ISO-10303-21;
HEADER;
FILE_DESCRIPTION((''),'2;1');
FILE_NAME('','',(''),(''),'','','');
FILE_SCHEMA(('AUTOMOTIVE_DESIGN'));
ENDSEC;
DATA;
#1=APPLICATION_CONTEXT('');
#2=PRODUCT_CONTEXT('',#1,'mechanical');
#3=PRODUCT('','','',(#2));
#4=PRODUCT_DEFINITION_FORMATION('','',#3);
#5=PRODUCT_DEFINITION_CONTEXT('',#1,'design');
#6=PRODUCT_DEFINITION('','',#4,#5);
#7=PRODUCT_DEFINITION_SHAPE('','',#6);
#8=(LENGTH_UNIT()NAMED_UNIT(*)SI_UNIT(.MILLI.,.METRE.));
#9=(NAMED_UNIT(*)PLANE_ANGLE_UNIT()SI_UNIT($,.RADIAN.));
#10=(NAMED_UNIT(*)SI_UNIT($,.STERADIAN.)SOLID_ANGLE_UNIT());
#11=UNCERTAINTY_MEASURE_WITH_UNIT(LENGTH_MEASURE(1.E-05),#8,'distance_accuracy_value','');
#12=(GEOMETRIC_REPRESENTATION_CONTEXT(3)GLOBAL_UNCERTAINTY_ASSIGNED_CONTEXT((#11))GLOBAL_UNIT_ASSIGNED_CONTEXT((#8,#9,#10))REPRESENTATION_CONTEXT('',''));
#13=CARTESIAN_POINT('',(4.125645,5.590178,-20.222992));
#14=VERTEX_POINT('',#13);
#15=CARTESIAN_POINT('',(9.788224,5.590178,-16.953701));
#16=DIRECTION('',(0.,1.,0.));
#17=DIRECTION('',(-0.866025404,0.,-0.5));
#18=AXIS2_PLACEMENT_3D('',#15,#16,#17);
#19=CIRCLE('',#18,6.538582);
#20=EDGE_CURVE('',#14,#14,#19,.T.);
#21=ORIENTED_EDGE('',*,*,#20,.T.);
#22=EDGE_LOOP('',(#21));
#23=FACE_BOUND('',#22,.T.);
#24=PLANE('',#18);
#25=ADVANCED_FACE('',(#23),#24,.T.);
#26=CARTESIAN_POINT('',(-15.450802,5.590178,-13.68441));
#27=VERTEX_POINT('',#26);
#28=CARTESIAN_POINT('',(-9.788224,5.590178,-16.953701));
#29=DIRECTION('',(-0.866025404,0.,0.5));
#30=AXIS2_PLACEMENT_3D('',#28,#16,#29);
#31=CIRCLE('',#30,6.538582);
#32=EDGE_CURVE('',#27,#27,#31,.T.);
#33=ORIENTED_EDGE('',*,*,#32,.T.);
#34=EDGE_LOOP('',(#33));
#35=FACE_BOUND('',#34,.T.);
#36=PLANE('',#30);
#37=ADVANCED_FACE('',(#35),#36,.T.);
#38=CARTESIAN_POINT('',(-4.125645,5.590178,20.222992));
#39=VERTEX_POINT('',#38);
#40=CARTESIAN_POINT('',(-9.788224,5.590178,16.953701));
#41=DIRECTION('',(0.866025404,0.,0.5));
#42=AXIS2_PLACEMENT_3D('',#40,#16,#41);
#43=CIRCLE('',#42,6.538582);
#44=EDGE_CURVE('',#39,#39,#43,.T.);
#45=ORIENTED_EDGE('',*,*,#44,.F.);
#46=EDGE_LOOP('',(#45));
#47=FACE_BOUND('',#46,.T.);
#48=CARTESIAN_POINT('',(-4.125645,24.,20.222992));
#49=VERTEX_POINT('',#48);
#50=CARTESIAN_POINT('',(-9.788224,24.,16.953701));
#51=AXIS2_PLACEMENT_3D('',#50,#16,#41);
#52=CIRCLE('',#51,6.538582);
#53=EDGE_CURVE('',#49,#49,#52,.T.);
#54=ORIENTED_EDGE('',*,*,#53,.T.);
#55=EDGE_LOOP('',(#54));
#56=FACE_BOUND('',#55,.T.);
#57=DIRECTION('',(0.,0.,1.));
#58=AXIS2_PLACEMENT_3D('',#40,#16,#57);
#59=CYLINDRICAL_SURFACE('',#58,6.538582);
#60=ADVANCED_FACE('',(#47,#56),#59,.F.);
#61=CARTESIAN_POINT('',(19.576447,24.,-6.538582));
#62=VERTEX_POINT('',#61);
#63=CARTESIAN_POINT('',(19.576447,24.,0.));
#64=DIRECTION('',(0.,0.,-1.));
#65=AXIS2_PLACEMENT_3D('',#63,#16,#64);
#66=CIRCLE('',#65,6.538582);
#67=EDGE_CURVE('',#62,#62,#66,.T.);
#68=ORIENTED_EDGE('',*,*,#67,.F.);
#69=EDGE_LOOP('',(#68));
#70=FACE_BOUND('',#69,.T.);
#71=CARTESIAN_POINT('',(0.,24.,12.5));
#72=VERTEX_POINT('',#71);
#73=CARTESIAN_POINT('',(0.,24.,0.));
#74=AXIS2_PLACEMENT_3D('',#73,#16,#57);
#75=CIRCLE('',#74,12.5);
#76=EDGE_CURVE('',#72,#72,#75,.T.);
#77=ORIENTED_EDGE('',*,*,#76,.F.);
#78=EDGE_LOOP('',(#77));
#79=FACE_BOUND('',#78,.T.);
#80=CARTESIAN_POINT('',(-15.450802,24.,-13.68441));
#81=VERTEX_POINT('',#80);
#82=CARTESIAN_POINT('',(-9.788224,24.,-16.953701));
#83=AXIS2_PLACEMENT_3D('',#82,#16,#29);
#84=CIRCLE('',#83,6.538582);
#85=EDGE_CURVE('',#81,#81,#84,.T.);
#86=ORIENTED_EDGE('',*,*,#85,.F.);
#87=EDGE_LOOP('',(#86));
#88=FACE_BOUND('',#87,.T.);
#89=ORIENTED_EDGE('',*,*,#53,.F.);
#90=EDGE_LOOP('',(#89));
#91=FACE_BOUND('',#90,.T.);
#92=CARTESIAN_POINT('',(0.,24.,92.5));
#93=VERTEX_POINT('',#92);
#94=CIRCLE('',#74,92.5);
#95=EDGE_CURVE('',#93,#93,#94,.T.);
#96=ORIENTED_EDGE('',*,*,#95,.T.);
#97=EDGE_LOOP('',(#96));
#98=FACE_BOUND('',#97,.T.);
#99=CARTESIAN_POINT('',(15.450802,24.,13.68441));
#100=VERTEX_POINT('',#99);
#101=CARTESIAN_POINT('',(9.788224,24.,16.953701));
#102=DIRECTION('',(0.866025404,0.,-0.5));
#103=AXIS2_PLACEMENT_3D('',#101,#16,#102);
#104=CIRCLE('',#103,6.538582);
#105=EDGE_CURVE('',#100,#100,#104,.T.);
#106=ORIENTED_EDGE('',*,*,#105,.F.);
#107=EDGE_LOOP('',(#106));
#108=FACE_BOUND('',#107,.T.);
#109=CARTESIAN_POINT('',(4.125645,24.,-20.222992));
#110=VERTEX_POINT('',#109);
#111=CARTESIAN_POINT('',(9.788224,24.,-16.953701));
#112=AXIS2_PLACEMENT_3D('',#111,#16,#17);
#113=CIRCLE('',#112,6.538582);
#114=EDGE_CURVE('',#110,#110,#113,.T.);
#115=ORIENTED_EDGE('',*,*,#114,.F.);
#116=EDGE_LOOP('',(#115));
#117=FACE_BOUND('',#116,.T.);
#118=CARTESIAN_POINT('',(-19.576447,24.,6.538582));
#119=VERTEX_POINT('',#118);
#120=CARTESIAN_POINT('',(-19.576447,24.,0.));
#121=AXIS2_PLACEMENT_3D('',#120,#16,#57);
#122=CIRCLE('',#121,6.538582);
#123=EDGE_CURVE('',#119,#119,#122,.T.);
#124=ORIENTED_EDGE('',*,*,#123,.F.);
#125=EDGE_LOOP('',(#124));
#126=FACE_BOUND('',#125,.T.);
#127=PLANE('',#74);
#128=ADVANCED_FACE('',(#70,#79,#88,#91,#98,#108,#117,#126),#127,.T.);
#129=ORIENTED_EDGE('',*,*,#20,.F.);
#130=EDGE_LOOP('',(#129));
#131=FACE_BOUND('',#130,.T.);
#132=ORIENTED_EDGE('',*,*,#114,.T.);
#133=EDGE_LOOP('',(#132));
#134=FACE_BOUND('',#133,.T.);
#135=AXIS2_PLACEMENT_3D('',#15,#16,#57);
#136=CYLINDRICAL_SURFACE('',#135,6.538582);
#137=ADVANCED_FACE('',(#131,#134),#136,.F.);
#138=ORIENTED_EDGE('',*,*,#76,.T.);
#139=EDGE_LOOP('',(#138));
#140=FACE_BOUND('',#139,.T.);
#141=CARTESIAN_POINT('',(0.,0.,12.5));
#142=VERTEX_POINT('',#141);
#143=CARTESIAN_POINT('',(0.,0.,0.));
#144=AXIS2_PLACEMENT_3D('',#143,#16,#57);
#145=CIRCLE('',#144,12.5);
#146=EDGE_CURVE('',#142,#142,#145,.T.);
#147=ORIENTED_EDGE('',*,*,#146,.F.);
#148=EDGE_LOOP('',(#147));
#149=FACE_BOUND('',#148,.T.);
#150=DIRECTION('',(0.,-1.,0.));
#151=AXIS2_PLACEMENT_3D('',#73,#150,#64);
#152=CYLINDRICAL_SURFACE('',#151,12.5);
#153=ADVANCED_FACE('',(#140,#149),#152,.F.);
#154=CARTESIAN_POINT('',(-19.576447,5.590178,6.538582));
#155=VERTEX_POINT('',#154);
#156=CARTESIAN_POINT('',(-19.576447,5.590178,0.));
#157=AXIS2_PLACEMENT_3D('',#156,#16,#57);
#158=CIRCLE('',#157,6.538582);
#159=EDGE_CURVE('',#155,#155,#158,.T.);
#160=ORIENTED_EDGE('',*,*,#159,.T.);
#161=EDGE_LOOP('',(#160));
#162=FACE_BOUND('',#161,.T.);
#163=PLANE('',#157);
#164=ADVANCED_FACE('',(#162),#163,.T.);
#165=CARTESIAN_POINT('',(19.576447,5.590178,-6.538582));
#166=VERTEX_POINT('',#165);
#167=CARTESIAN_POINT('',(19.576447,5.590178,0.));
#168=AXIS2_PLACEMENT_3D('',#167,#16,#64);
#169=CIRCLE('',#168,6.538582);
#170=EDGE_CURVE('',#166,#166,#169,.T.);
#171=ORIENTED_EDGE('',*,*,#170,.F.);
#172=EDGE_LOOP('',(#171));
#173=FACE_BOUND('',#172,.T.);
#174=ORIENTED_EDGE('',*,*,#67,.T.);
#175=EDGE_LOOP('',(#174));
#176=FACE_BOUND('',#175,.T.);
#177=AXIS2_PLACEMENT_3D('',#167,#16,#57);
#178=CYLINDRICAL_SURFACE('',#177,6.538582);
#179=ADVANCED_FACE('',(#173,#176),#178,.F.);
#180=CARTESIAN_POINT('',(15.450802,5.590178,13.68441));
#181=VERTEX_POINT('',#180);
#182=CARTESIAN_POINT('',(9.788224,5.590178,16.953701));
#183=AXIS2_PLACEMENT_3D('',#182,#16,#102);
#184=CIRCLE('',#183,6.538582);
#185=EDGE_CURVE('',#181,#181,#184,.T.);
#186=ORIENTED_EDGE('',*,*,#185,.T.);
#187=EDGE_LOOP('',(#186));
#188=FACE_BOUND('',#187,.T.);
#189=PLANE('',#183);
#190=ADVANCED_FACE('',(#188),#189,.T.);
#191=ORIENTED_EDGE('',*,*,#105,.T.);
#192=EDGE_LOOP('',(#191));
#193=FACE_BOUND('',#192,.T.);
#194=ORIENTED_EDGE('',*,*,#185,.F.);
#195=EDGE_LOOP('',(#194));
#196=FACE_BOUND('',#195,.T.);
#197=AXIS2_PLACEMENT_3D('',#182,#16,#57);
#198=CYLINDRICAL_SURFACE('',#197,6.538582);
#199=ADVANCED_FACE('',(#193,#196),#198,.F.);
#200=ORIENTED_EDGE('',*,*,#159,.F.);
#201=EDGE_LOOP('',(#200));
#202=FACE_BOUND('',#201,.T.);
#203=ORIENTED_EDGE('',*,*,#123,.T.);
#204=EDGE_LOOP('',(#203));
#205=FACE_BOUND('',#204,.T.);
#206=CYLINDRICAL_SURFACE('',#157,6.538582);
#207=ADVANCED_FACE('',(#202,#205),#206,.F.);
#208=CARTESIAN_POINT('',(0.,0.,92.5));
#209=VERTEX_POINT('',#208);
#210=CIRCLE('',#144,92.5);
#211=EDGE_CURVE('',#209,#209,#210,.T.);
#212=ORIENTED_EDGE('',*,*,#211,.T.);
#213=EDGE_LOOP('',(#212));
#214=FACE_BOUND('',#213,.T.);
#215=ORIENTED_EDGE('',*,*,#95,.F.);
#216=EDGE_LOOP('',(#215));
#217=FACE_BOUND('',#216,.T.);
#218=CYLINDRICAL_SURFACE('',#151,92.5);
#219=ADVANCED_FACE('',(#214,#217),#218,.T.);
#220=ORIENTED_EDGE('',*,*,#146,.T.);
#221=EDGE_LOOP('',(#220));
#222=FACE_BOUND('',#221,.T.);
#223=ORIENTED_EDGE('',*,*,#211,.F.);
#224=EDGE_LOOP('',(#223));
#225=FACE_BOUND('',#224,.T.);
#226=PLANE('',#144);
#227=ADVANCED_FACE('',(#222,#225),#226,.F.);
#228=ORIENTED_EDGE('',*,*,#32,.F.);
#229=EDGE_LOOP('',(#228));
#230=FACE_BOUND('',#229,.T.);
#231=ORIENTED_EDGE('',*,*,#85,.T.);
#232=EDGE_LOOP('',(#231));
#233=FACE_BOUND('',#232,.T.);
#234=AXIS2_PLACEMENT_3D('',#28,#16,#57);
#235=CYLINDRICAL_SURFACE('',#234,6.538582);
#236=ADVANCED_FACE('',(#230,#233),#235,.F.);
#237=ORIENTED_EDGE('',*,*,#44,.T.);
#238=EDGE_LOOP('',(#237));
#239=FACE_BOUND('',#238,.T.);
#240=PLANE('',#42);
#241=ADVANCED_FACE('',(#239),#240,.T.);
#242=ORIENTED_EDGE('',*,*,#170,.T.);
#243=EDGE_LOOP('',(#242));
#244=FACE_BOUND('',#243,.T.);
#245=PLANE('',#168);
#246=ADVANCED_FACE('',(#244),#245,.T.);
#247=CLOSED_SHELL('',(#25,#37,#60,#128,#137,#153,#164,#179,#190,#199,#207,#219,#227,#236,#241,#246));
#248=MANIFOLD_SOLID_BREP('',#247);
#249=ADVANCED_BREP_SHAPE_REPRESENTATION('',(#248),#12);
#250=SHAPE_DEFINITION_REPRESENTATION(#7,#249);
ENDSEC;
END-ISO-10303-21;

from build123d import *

# Parameters (mm, degrees)
SKETCH1_R           = 92.5
BOSS_EXTRUDE1_DEPTH = 24
SKETCH2_R           = 12.5
CUT_EXTRUDE1_DEPTH  = 133.998120287
SKETCH3_R           = 6.538582323
CUT_EXTRUDE2_DEPTH  = 18.409821693
CIRPATTERN1_COUNT   = 6


with BuildPart() as part:
    # Sketch1 → Boss-Extrude1 (new body)
    with BuildSketch(Plane(origin=(0, 0, 0), x_dir=(1, 0, 0), z_dir=(0, 1, 0))):
        Circle(SKETCH1_R)
    extrude(amount=BOSS_EXTRUDE1_DEPTH)

    # Sketch2 → Cut-Extrude1 (cut, through all)
    with BuildSketch(Plane(origin=(0, 0, 0), x_dir=(1, 0, 0), z_dir=(0, 1, 0))):
        Circle(SKETCH2_R)
    extrude(amount=CUT_EXTRUDE1_DEPTH, mode=Mode.SUBTRACT)

    # Sketch3 → Cut-Extrude2 (cut)
    with BuildSketch(Plane(origin=(0, 24, 0), x_dir=(1, 0, 0), z_dir=(0, 1, 0))):
        with Locations((-19.576447446, 0)):
            Circle(SKETCH3_R)
    cut_extrude2 = extrude(amount=-CUT_EXTRUDE2_DEPTH, mode=Mode.SUBTRACT)

    # CirPattern1: Cut-Extrude2 ×6 about axis
    cirpattern1_axis = Axis((0, 0, 0), (0, 1, 0))
    for i in range(1, CIRPATTERN1_COUNT):
        add(cut_extrude2.rotate(cirpattern1_axis, i * 360 / CIRPATTERN1_COUNT), mode=Mode.SUBTRACT)


solid = part.part
